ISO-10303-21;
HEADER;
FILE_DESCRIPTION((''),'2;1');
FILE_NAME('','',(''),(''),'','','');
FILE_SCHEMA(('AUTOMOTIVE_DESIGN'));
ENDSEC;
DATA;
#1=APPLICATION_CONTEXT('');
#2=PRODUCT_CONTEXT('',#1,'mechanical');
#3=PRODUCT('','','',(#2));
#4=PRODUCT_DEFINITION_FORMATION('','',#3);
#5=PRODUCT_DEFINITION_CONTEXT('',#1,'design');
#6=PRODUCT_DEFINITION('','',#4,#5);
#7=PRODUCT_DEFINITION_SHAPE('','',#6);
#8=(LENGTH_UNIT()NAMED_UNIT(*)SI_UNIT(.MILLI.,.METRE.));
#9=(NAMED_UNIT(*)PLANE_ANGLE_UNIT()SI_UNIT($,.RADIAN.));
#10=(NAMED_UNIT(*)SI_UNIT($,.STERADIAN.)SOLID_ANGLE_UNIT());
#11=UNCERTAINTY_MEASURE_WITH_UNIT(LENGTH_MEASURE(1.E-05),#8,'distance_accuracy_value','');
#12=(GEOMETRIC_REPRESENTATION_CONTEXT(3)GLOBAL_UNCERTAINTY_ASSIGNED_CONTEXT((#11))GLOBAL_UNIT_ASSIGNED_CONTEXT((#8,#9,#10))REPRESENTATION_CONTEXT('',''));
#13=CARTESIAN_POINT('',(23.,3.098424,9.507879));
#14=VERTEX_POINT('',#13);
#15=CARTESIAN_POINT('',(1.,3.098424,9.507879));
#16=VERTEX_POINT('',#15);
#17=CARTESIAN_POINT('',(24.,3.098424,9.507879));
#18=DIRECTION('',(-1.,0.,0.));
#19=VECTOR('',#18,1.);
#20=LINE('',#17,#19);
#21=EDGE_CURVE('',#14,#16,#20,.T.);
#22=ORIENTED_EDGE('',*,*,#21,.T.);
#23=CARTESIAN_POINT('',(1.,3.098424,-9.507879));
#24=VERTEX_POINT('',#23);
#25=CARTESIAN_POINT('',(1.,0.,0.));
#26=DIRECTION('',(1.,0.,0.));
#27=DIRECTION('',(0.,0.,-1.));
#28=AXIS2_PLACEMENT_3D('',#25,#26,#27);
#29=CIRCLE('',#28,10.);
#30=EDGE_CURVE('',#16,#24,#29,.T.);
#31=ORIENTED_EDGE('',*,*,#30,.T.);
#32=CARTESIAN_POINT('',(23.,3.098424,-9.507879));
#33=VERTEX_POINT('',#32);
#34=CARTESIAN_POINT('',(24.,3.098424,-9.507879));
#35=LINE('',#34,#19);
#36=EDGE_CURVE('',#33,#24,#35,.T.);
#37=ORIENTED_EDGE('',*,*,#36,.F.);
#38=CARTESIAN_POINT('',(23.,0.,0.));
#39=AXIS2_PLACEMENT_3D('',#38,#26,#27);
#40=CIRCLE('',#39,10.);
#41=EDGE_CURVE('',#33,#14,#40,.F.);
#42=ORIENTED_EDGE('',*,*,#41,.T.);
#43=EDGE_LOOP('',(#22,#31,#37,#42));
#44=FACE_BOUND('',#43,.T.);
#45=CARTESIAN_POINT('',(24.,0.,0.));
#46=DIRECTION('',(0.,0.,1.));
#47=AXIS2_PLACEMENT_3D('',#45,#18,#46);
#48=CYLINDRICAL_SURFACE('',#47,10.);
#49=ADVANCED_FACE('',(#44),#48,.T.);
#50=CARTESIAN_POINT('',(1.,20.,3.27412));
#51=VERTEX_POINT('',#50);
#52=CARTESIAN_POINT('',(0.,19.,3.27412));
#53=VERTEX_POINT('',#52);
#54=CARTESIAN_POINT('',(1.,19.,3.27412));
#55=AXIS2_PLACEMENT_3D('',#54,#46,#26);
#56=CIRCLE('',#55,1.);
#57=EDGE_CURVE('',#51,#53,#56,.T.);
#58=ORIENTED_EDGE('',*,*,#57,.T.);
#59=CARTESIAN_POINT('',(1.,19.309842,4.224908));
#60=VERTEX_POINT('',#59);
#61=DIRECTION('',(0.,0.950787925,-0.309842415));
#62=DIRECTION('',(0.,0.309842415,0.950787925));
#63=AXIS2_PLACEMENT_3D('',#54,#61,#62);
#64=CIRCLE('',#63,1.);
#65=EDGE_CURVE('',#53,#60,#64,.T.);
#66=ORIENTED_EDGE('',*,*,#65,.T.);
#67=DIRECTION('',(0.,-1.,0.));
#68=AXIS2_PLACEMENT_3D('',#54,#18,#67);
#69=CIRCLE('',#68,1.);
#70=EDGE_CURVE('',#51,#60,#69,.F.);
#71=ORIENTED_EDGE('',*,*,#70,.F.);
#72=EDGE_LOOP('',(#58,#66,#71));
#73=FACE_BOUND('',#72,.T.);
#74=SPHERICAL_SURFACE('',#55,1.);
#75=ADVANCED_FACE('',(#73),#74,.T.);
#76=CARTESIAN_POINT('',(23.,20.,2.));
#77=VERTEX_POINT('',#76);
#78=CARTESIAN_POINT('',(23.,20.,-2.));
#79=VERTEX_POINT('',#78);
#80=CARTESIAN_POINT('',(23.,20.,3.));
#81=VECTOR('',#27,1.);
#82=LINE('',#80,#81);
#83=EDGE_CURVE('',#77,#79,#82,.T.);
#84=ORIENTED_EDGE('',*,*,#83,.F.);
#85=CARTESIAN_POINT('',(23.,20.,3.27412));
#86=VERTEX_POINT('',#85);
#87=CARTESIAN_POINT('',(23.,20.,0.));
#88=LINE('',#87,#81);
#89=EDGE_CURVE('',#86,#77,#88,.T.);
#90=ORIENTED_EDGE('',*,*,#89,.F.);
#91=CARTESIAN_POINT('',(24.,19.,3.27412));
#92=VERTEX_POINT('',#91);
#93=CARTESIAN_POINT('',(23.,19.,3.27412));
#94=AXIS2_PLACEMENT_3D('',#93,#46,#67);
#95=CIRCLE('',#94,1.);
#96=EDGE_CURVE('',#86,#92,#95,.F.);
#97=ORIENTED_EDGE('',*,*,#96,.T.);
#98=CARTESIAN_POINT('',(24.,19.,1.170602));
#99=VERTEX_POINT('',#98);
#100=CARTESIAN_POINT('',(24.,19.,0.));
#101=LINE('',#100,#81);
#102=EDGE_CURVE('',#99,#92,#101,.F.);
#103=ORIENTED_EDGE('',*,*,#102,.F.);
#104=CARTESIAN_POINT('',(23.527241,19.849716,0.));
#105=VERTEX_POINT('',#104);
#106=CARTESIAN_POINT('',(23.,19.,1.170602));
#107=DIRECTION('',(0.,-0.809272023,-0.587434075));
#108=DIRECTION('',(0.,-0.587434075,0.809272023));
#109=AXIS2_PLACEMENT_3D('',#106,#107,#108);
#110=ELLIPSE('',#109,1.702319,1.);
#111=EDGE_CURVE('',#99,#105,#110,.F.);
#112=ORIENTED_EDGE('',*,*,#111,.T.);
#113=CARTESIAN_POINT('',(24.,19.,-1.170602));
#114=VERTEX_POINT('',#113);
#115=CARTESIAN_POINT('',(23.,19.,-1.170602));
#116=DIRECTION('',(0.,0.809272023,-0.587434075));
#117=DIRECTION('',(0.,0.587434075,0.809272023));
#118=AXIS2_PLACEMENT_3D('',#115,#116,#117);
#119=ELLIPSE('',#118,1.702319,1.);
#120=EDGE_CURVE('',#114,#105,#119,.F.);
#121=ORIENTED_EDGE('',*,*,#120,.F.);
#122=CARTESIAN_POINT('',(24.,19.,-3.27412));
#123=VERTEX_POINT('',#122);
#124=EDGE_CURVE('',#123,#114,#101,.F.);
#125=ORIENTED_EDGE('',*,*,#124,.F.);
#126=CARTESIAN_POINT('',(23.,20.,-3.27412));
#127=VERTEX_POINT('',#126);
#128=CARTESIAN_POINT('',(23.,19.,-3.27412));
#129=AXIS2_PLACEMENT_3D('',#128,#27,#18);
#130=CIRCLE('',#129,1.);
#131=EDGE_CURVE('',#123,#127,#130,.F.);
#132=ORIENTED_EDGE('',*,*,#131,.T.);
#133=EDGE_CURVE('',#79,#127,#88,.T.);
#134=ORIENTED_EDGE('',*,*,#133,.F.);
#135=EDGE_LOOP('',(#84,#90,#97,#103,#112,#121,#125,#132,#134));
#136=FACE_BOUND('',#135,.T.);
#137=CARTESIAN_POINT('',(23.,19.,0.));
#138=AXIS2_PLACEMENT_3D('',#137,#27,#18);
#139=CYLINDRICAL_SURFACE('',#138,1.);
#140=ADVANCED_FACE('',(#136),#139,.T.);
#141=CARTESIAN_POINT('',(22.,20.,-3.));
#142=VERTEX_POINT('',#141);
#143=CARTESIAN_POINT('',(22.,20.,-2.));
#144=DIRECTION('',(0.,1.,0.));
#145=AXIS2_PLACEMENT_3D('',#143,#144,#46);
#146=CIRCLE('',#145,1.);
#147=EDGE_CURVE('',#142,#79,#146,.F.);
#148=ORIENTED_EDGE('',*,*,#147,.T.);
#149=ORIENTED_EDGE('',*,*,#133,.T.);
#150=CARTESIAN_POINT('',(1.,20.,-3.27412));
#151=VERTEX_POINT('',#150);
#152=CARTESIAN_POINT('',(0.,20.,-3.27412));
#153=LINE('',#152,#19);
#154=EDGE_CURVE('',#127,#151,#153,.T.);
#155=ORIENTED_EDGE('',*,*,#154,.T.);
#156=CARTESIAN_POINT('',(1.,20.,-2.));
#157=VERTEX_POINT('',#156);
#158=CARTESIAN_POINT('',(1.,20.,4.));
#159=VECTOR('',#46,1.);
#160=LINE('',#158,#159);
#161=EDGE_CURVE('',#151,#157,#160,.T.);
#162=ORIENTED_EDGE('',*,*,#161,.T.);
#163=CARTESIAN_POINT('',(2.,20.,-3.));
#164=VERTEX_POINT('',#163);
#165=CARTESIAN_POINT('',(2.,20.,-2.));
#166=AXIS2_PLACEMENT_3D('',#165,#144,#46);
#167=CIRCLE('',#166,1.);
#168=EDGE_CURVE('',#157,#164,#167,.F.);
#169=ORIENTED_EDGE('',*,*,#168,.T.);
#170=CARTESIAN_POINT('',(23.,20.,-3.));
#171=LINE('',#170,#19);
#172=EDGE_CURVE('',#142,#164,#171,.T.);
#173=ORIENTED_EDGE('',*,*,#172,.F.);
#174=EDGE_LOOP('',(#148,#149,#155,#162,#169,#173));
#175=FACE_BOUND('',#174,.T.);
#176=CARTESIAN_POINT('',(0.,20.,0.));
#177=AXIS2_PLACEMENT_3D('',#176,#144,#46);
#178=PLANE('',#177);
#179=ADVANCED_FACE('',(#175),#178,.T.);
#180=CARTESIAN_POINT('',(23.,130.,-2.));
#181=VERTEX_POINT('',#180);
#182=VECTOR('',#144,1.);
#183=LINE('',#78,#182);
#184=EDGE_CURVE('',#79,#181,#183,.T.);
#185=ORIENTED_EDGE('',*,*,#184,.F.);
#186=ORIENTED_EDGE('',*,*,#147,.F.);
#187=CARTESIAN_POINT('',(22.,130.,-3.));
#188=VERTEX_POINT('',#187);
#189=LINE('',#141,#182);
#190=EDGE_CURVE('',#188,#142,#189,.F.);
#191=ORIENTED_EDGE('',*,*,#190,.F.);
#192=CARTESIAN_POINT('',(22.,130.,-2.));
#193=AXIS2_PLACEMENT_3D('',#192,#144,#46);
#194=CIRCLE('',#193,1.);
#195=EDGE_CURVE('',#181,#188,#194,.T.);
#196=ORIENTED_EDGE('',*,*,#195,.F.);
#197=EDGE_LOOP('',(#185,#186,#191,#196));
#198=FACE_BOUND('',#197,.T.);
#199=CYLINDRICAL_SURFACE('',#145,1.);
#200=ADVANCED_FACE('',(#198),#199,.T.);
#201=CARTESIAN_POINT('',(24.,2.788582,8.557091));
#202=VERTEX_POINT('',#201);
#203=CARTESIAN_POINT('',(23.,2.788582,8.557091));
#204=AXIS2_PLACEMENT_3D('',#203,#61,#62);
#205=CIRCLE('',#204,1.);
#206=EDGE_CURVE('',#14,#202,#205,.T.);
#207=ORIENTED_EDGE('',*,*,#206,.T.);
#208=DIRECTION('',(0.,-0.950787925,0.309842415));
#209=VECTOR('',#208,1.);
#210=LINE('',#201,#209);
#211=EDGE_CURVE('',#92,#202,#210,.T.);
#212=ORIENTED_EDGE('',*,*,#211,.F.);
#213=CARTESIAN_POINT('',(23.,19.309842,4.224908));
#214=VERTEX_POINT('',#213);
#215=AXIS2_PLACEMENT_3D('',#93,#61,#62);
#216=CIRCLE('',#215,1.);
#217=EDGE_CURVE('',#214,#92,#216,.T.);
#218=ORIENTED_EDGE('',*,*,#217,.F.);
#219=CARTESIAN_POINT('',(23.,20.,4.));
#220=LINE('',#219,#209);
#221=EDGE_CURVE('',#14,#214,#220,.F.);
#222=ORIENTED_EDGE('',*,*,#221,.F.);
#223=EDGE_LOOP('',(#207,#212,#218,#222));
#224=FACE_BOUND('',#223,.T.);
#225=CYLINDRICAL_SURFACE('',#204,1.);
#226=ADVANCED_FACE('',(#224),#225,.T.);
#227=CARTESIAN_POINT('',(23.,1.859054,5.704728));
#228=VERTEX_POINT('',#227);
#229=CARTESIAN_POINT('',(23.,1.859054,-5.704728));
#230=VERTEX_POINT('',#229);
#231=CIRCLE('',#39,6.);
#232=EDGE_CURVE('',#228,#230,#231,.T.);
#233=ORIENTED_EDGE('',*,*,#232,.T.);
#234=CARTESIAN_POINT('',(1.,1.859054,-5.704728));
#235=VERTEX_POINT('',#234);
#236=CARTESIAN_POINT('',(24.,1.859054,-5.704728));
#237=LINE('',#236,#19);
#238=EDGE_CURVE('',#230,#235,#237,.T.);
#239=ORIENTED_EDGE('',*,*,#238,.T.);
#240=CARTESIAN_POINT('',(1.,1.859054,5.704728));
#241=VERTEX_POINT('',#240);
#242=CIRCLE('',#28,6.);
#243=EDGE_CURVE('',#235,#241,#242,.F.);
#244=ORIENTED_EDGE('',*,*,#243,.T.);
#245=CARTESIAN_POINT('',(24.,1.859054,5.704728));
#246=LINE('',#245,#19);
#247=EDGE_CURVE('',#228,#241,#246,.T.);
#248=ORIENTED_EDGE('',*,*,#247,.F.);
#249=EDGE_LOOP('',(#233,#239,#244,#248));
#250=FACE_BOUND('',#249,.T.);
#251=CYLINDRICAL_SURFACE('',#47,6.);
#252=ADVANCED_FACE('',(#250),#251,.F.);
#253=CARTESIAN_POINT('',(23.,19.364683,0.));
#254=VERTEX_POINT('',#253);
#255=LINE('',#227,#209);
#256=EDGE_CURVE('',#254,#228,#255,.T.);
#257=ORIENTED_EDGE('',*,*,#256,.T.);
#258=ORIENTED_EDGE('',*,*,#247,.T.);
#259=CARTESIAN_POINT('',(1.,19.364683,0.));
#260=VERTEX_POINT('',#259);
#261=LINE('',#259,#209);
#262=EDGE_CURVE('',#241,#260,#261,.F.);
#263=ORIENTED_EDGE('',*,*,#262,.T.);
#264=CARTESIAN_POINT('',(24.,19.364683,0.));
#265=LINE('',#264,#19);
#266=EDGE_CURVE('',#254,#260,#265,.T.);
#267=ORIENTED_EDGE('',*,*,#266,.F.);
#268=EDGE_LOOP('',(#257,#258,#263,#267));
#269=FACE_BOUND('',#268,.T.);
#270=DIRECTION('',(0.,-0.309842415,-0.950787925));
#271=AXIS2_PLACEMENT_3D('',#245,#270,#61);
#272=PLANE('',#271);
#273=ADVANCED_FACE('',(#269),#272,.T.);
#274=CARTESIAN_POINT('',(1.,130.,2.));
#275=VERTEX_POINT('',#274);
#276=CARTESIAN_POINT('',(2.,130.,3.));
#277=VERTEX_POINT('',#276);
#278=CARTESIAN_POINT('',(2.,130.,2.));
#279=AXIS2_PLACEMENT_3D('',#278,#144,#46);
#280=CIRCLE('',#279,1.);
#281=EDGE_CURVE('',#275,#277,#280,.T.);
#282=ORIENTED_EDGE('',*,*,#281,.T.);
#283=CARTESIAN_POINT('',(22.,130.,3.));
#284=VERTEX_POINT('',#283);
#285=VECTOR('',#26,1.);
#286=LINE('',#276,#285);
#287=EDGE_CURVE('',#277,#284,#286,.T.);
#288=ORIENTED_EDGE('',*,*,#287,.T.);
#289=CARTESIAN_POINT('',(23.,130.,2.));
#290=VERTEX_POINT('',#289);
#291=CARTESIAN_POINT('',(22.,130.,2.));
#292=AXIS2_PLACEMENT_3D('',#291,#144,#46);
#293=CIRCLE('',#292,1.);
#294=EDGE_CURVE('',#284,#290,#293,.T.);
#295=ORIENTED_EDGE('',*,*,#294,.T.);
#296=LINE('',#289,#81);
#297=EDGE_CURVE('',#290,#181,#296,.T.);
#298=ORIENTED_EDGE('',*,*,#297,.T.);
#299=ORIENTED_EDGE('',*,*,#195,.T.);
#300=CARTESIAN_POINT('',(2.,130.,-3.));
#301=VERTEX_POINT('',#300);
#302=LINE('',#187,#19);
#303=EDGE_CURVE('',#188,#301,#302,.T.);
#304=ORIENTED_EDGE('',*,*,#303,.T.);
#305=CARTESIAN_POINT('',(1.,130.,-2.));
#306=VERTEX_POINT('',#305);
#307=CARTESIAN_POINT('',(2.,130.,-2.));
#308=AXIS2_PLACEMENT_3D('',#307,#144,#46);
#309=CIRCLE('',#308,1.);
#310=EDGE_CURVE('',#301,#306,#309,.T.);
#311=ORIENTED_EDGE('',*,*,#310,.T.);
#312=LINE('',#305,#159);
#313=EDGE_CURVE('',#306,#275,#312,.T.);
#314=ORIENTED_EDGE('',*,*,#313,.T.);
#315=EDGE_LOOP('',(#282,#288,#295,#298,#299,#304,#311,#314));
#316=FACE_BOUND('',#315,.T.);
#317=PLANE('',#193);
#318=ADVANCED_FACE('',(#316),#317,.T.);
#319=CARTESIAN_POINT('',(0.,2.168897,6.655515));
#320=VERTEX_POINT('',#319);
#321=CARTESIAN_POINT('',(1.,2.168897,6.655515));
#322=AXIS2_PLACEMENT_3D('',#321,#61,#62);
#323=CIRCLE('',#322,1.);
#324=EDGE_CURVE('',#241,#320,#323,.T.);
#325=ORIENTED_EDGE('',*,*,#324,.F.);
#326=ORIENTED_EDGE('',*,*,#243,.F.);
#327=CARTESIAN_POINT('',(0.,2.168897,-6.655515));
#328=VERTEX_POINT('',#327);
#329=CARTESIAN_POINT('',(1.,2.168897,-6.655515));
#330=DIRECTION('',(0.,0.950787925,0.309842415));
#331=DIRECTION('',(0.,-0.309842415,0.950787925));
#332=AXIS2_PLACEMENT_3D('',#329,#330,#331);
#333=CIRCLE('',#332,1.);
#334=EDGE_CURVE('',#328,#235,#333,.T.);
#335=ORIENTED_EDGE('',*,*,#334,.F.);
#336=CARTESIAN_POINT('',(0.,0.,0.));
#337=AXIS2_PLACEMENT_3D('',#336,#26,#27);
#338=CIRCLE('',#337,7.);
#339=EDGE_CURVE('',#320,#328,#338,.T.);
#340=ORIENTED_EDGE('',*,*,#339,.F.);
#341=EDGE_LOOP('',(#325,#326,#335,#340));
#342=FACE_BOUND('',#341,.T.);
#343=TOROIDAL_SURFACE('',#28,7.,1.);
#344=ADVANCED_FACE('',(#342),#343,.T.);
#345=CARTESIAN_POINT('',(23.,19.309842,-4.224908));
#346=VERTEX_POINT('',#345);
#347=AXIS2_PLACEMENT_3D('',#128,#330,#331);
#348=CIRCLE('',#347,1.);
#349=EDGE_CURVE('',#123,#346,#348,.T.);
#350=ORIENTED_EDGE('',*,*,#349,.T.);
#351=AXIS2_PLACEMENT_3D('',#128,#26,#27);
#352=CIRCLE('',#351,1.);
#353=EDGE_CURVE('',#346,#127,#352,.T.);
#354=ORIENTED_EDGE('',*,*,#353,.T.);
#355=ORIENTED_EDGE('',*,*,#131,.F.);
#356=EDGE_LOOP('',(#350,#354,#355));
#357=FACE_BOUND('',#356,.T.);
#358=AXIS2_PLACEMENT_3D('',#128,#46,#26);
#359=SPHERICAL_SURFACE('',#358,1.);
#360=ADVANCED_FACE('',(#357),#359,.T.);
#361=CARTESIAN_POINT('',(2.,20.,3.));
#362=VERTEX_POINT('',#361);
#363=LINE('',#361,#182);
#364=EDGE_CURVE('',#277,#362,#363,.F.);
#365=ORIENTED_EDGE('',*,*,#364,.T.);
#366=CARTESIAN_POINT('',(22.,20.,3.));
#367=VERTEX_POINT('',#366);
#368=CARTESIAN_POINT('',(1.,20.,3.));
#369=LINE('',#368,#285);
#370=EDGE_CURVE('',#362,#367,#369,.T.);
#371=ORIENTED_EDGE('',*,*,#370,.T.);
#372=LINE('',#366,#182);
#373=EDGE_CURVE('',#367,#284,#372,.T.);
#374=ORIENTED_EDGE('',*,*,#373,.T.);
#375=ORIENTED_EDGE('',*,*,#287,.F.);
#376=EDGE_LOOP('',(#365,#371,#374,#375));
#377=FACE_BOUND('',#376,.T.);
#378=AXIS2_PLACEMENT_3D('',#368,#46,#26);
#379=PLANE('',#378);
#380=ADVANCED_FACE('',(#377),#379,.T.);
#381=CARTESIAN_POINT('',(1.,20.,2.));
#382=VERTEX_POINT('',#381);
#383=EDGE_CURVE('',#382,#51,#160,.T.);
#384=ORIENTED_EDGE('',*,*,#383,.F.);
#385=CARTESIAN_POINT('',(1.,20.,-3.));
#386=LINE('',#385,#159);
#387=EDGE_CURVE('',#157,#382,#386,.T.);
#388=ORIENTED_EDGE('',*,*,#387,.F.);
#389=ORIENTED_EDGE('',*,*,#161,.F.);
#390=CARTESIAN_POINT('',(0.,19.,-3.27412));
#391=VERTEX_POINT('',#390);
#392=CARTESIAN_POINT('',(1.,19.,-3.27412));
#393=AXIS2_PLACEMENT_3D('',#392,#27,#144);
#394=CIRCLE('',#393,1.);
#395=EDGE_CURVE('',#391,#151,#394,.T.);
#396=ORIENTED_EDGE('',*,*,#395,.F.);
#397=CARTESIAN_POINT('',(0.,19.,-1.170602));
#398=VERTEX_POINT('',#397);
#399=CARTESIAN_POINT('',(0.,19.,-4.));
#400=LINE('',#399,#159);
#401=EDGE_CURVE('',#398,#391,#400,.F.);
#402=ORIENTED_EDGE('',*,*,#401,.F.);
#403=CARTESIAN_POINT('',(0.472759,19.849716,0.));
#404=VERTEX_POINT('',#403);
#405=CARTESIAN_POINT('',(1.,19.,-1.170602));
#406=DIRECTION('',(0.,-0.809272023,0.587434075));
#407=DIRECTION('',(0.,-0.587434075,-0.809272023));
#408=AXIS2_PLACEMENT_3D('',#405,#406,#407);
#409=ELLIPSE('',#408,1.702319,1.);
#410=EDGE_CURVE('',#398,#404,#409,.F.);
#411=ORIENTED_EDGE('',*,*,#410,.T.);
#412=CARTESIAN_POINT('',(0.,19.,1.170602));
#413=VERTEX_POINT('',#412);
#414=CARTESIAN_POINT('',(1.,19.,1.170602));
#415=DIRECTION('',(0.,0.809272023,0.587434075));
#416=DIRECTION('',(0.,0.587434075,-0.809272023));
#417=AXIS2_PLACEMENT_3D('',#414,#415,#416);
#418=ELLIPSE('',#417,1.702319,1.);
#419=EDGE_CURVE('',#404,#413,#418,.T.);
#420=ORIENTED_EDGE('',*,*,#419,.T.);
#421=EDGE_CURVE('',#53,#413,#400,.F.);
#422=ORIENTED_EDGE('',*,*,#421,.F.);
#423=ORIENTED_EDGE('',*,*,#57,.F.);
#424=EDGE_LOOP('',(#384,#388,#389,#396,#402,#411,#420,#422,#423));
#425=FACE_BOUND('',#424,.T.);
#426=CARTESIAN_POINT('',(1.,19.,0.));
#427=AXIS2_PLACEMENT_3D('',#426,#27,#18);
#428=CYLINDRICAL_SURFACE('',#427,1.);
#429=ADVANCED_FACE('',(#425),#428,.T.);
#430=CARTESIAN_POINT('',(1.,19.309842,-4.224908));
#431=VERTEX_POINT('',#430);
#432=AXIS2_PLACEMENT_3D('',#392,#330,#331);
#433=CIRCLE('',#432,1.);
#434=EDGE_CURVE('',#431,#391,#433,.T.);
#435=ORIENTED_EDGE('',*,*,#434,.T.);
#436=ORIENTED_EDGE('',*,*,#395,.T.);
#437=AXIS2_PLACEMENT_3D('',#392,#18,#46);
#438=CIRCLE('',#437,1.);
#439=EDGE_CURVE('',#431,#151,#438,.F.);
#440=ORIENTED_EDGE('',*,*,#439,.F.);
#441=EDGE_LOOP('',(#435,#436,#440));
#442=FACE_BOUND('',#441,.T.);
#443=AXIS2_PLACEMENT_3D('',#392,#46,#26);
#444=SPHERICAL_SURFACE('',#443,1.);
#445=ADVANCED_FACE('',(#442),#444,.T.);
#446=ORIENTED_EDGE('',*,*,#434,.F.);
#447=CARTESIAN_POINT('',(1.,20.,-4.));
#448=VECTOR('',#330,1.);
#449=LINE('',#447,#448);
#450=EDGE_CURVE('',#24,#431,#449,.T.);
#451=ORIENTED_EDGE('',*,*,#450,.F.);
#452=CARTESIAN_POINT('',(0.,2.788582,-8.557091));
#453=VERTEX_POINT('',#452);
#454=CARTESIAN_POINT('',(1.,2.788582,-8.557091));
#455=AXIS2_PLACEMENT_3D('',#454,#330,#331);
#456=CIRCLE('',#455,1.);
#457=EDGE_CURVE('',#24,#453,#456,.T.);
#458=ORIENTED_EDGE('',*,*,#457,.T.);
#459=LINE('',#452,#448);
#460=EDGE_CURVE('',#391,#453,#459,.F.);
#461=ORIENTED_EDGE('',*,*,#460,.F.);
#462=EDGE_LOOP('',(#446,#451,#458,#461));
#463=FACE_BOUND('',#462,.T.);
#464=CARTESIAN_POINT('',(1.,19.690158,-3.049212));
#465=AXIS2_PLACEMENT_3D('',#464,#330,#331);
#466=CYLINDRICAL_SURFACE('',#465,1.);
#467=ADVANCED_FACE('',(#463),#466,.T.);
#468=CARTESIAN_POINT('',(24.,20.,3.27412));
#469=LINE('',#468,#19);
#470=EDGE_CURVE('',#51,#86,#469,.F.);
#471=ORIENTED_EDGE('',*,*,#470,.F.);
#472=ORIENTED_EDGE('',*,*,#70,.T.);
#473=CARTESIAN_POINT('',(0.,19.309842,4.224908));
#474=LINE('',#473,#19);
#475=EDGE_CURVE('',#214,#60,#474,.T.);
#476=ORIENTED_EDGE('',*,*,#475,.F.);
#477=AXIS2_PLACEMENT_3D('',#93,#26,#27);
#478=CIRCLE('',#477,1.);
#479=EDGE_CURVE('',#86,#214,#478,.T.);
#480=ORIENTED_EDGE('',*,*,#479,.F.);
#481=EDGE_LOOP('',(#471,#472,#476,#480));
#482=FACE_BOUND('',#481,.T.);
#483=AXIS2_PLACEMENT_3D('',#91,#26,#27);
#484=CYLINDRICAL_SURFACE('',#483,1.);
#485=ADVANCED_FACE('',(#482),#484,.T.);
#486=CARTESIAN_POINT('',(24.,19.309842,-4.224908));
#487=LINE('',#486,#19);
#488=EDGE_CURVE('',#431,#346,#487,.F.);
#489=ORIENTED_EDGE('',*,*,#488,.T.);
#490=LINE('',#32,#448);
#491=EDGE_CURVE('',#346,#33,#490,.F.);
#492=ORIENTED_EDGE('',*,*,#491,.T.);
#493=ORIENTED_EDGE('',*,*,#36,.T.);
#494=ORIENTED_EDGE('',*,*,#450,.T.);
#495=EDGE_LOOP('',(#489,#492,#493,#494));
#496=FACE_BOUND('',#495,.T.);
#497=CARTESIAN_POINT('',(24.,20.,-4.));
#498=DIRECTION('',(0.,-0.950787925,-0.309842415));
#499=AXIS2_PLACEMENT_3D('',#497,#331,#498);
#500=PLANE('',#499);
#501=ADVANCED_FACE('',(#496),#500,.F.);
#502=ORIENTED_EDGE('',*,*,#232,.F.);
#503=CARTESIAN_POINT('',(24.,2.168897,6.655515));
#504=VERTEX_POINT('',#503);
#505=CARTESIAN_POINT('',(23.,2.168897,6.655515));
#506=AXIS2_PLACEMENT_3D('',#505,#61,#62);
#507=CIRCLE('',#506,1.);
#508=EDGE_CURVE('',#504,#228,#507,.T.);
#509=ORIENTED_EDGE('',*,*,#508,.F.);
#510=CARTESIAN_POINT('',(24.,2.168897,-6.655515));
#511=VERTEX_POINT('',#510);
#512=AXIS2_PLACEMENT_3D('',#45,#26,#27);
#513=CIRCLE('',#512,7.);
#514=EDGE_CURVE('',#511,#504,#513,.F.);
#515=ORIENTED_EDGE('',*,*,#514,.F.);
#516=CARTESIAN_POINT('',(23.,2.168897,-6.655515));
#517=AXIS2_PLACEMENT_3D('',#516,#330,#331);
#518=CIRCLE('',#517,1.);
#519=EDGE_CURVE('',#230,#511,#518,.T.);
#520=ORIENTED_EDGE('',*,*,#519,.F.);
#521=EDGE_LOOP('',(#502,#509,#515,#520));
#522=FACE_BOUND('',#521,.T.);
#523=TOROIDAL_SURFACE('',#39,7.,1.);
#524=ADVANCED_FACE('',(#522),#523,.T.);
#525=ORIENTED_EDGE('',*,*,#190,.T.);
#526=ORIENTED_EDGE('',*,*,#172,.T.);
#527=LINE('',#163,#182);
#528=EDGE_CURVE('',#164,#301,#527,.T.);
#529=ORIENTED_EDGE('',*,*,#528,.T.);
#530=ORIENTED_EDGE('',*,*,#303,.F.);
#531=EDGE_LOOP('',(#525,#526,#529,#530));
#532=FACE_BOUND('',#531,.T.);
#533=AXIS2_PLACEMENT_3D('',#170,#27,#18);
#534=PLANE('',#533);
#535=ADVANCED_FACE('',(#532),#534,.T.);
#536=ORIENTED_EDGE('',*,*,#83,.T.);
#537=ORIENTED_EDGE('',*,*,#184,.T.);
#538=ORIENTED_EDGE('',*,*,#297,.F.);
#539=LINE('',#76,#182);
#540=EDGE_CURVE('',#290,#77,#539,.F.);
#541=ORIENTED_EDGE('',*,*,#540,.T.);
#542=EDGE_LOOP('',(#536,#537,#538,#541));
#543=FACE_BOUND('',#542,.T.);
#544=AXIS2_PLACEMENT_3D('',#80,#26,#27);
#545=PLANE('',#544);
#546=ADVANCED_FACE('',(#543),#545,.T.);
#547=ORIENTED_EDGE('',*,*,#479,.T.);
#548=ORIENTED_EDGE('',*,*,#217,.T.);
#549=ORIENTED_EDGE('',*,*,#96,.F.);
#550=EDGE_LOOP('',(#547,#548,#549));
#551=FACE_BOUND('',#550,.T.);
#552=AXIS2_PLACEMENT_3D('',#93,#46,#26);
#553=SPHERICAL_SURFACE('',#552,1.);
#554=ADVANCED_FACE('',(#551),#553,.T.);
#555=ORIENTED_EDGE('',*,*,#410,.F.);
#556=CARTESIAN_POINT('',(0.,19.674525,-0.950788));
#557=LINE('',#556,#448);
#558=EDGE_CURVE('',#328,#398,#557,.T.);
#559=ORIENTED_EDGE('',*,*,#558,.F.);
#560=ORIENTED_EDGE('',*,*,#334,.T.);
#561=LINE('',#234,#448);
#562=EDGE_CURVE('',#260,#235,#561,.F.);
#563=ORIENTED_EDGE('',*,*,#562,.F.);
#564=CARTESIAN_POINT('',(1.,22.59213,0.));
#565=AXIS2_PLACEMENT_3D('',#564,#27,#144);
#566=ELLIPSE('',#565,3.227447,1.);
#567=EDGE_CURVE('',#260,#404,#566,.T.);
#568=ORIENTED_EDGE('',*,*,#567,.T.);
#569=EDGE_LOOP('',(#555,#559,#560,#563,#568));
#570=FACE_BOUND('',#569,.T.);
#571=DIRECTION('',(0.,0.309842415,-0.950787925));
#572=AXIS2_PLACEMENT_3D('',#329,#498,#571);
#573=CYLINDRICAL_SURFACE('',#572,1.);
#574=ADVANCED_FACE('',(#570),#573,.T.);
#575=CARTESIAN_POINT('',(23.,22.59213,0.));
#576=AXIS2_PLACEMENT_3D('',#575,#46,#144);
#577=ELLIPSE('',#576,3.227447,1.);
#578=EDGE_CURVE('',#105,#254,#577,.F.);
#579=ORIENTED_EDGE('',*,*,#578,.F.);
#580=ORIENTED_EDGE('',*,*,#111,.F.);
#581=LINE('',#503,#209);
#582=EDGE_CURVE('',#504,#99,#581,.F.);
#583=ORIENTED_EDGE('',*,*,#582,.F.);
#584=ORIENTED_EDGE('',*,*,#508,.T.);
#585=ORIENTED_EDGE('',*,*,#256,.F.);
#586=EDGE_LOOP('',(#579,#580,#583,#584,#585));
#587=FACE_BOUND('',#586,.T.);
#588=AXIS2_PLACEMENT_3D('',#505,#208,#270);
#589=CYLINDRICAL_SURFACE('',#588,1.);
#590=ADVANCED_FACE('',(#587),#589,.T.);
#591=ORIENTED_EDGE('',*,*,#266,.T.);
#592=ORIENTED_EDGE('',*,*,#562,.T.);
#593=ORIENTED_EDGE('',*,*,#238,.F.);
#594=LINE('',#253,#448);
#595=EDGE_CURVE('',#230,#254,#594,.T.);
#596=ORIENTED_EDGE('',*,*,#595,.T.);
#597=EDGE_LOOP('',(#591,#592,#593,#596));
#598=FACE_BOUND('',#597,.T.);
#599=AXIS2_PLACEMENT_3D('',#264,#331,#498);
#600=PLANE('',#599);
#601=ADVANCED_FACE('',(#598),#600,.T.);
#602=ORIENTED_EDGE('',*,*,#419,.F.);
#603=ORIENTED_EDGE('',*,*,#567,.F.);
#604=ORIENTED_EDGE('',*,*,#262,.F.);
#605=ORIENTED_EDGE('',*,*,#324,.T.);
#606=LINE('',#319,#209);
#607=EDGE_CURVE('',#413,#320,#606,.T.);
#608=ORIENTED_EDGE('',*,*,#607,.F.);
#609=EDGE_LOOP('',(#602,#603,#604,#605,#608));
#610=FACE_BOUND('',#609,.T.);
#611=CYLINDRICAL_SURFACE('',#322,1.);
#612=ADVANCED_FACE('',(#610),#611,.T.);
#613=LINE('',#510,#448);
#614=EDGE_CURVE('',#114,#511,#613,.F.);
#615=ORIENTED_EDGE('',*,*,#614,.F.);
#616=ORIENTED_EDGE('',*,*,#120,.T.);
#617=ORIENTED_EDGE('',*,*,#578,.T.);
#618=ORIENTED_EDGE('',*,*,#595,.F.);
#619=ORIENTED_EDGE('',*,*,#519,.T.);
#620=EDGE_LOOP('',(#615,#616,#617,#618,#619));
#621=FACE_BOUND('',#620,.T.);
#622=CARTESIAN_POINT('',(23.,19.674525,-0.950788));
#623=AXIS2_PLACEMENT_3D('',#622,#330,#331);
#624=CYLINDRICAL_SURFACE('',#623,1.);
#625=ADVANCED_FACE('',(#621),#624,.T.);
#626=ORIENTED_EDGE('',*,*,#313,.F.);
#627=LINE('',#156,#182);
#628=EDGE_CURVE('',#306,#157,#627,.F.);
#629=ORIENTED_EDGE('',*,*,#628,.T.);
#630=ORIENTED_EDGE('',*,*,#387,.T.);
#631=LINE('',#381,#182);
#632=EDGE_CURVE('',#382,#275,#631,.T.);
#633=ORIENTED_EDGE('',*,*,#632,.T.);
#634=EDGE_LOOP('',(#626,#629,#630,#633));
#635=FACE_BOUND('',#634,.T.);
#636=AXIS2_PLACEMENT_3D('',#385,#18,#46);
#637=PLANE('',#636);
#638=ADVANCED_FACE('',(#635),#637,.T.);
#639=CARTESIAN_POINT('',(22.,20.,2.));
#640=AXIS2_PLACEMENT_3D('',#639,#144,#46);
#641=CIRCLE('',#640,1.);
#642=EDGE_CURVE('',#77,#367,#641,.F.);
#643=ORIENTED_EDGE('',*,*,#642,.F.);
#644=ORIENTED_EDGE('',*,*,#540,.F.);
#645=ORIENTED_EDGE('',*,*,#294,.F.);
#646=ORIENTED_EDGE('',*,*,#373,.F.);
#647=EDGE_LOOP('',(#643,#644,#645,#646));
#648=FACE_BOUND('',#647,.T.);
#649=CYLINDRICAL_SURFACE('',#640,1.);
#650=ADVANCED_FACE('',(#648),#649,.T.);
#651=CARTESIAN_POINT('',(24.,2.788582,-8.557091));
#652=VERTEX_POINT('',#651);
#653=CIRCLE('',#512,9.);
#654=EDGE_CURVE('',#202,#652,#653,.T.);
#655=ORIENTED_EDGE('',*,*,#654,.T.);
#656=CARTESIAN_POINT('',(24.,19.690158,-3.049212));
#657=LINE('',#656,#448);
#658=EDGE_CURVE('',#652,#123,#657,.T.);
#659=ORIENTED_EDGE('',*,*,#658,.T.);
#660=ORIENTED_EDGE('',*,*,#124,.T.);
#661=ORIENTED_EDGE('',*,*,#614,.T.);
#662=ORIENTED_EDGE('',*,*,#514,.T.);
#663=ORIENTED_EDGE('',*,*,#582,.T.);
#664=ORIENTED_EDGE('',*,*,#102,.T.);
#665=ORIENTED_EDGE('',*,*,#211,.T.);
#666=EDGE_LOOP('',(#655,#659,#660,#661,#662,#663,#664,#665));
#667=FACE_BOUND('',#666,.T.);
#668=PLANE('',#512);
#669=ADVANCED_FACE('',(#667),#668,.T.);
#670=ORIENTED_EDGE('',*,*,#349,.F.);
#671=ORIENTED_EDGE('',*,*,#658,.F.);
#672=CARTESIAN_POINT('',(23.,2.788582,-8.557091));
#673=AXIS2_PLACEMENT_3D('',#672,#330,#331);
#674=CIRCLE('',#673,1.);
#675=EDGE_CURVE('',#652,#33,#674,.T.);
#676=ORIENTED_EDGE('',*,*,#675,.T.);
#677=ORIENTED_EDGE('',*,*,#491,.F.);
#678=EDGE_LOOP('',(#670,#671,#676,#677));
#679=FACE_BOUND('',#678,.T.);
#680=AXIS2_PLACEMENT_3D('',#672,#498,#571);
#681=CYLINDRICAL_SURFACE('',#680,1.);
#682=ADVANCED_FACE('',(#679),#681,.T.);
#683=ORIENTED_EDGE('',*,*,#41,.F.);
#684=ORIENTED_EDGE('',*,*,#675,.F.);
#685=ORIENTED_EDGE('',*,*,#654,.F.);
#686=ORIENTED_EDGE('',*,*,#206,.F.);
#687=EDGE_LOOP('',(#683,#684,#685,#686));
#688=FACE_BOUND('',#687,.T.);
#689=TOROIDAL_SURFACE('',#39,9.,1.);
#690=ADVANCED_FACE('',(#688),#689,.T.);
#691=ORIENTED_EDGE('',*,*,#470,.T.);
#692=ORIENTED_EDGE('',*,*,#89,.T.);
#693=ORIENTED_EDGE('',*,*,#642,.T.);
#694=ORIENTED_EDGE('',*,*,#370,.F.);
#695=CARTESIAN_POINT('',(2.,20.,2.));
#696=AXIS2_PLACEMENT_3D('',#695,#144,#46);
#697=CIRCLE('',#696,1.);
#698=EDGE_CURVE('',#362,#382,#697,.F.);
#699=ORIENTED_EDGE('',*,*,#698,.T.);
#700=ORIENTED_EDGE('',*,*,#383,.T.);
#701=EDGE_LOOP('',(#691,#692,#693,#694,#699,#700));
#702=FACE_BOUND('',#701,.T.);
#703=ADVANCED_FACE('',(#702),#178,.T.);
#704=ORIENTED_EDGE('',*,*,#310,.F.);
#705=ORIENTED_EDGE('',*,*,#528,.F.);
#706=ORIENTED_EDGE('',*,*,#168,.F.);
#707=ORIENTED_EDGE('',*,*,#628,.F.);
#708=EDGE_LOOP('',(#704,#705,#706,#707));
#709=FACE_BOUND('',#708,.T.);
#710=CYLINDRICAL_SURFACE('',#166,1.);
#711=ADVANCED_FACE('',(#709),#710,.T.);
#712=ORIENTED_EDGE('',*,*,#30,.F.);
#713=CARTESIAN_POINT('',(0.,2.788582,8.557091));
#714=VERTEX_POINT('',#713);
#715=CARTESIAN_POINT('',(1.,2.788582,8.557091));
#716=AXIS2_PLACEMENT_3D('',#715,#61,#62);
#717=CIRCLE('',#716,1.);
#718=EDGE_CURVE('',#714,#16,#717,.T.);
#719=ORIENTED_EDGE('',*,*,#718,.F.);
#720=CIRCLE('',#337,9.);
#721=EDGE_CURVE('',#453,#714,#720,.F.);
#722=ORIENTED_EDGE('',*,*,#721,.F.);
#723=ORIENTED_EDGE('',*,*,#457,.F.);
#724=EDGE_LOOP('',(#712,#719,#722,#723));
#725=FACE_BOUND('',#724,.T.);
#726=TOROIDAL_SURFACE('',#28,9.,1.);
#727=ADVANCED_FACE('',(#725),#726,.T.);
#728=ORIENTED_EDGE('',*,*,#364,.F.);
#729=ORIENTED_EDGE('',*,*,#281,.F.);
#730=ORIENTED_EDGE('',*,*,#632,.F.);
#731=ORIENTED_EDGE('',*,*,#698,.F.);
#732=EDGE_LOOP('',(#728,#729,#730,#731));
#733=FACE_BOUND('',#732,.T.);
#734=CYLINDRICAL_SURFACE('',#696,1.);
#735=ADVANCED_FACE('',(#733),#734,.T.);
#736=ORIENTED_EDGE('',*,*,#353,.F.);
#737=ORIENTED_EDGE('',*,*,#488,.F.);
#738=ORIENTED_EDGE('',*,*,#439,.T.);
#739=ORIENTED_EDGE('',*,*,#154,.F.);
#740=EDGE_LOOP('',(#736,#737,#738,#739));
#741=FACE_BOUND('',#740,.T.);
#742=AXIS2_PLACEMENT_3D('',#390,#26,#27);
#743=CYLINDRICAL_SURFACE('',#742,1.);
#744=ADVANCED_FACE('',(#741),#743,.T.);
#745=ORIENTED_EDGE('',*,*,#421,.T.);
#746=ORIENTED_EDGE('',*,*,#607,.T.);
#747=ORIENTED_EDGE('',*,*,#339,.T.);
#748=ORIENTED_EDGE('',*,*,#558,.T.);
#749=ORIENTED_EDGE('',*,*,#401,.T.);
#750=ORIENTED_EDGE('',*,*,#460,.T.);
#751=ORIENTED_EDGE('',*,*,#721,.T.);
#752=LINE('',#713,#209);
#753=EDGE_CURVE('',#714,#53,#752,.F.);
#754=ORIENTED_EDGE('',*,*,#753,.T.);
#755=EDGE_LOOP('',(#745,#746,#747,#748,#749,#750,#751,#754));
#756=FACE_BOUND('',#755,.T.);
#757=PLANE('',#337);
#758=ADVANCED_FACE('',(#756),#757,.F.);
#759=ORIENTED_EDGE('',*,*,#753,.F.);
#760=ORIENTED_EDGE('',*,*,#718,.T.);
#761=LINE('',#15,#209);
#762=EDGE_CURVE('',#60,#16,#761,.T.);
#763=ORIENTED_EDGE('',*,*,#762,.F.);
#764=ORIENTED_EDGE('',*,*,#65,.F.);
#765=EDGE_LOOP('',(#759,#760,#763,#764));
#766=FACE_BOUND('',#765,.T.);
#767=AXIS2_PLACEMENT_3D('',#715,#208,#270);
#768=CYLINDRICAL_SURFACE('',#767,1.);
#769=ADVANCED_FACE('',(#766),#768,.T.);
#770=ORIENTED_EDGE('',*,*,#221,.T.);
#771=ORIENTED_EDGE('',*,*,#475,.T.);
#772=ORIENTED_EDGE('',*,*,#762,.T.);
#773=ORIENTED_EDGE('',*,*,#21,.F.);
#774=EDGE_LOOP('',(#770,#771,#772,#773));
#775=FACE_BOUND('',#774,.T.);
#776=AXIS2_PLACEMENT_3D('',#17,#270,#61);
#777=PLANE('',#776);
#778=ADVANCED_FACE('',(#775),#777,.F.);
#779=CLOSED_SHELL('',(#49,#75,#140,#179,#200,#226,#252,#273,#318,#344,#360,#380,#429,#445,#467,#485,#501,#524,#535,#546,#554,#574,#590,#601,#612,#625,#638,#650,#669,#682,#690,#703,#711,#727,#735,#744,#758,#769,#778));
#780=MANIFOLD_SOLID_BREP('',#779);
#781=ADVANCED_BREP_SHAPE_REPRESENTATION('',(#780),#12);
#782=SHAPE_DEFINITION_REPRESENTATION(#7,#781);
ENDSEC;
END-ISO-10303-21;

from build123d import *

# Parameters (mm, degrees)
BOSS_EXTRUDE1_DEPTH = 24
SKETCH2_W           = 24
SKETCH2_H           = 8
SKETCH2_W_2         = 22
SKETCH2_H_2         = 6
CUT_EXTRUDE1_DEPTH  = 40
FILLET1_R           = 1
FILLET2_R           = 1
BOSS_EXTRUDE2_DEPTH = 70


with BuildPart() as part:
    # Sketch1 → Boss-Extrude1 (new body)
    with BuildSketch(Plane(origin=(0, 0, 0), x_dir=(0, 0, -1), z_dir=(1, 0, 0))):
        with BuildLine():
            Line((-9.507879247, 3.098424151), (-4, 20))
            Line((-4, 20), (-4, 60))
            Line((-4, 60), (4, 60))
            Line((4, 60), (4, 20))
            Line((4, 20), (9.507879247, 3.098424151))
            ThreePointArc((9.507879247, 3.098424151), (0, -10), (-9.507879247, 3.098424151))
        make_face()
        with BuildLine():
            Line((-5.704727548, 1.85905449), (0, 19.364682524))
            Line((0, 19.364682524), (5.704727548, 1.85905449))
            ThreePointArc((5.704727548, 1.85905449), (0, -6), (-5.704727548, 1.85905449))
        make_face(mode=Mode.SUBTRACT)
    extrude(amount=BOSS_EXTRUDE1_DEPTH)

    # Sketch2 → Cut-Extrude1 (cut)
    with BuildSketch(Plane(origin=(0, 60, 0), x_dir=(1, 0, 0), z_dir=(0, 1, 0))):
        with Locations((12, 0)):
            Rectangle(SKETCH2_W, SKETCH2_H)
        with Locations((12, 0)):
            Rectangle(SKETCH2_W_2, SKETCH2_H_2, mode=Mode.SUBTRACT)
    extrude(amount=-CUT_EXTRUDE1_DEPTH, mode=Mode.SUBTRACT)

    # Fillet1
    # the kernel refuses this fillet: 1 mm, written as the material it takes off along each edge
    with BuildSketch(Plane(origin=(1, 19, 3.274120372), x_dir=(0, 0.3098424150516233, 0.9507879247418836), z_dir=(-1, 0, 0))) as fillet1_piece_1_section:
        Polygon((0, 0), (FILLET1_R * 1.02, 0), (FILLET1_R * 1.02, FILLET1_R * 0.740397220377), (FILLET1_R * 0.316039263353, FILLET1_R * 0.969803683237), align=None)
    fillet1_piece_1 = extrude(amount=FILLET1_R * 1.02, mode=Mode.PRIVATE)
    fillet1_piece_1 = fillet1_piece_1 - Plane(origin=(1, 19, 3.274120372), x_dir=(0, -0.8092720231948041, -0.5874340750026239), z_dir=(-1, 0, 0)) * Sphere(FILLET1_R, mode=Mode.PRIVATE)
    add(fillet1_piece_1, mode=Mode.SUBTRACT)
    with BuildSketch(Plane(origin=(23, 19, 3.274120372), x_dir=(0, 0.3098424150516233, 0.9507879247418836), z_dir=(1, 0, 0))) as fillet1_piece_2_section:
        Polygon((0, 0), (FILLET1_R * 1.02, 0), (FILLET1_R * 1.02, -FILLET1_R * 0.740397220377), (FILLET1_R * 0.316039263353, -FILLET1_R * 0.969803683237), align=None)
    fillet1_piece_2 = extrude(amount=FILLET1_R * 1.02, mode=Mode.PRIVATE)
    fillet1_piece_2 = fillet1_piece_2 - Plane(origin=(23, 19, 3.274120372), x_dir=(0, -0.8092720231948041, -0.5874340750026239), z_dir=(1, 0, 0)) * Sphere(FILLET1_R, mode=Mode.PRIVATE)
    add(fillet1_piece_2, mode=Mode.SUBTRACT)
    with BuildSketch(Plane(origin=(1, 19, -3.274120372), x_dir=(0, 0.3098424150516232, -0.9507879247418838), z_dir=(-1, 0, 0))) as fillet1_piece_3_section:
        Polygon((0, 0), (FILLET1_R * 1.02, 0), (FILLET1_R * 1.02, -FILLET1_R * 0.740397220377), (FILLET1_R * 0.316039263353, -FILLET1_R * 0.969803683237), align=None)
    fillet1_piece_3 = extrude(amount=FILLET1_R * 1.02, mode=Mode.PRIVATE)
    fillet1_piece_3 = fillet1_piece_3 - Plane(origin=(1, 19, -3.274120372), x_dir=(0, -0.8092720231948041, 0.587434075002624), z_dir=(-1, 0, 0)) * Sphere(FILLET1_R, mode=Mode.PRIVATE)
    add(fillet1_piece_3, mode=Mode.SUBTRACT)
    with BuildSketch(Plane(origin=(23, 19, -3.274120372), x_dir=(0, 0.3098424150516232, -0.9507879247418838), z_dir=(1, 0, 0))) as fillet1_piece_4_section:
        Polygon((0, 0), (FILLET1_R * 1.02, 0), (FILLET1_R * 1.02, FILLET1_R * 0.740397220377), (FILLET1_R * 0.316039263353, FILLET1_R * 0.969803683237), align=None)
    fillet1_piece_4 = extrude(amount=FILLET1_R * 1.02, mode=Mode.PRIVATE)
    fillet1_piece_4 = fillet1_piece_4 - Plane(origin=(23, 19, -3.274120372), x_dir=(0, -0.8092720231948041, 0.587434075002624), z_dir=(1, 0, 0)) * Sphere(FILLET1_R, mode=Mode.PRIVATE)
    add(fillet1_piece_4, mode=Mode.SUBTRACT)
    with BuildSketch(Plane(origin=(1, 20, 4), x_dir=(0, -0.9507879247418841, 0.30984241505162113), z_dir=(1, 0, 0)), Plane(origin=(1, 20, -4), x_dir=(0, 0, 1), z_dir=(1, 0, 0))) as fillet1_piece_5:
        with BuildLine():
            CenterArc((FILLET1_R * 0.725879627821, FILLET1_R), FILLET1_R, 198.04973395, 71.95026605)
            Line((-FILLET1_R * 0.224908296921, FILLET1_R * 0.690157584948), (-FILLET1_R * 0.243924055416, FILLET1_R * 0.683960736647))
            Line((-FILLET1_R * 0.243924055416, FILLET1_R * 0.683960736647), (-FILLET1_R * 0.0145175925564, -FILLET1_R * 0.02))
            Line((-FILLET1_R * 0.0145175925564, -FILLET1_R * 0.02), (FILLET1_R * 0.725879627821, -FILLET1_R * 0.02))
            Line((FILLET1_R * 0.725879627821, -FILLET1_R * 0.02), (FILLET1_R * 0.725879627821, 0))
        make_face()
    extrude(amount=22, mode=Mode.SUBTRACT)
    with BuildSketch(Plane(origin=(0, 0, 0), x_dir=(0, 0.3098424150516232, -0.9507879247418836), z_dir=(0, 0.9507879247418836, 0.3098424150516232))) as fillet1_piece_6:
        with BuildLine():
            CenterArc((6 + FILLET1_R, -FILLET1_R), FILLET1_R, 90, 90)
            Line((6, -FILLET1_R), (6 - FILLET1_R * 0.02, -FILLET1_R))
            Line((6 - FILLET1_R * 0.02, -FILLET1_R), (6 - FILLET1_R * 0.02, FILLET1_R * 0.02))
            Line((6 - FILLET1_R * 0.02, FILLET1_R * 0.02), (6 + FILLET1_R, FILLET1_R * 0.02))
            Line((6 + FILLET1_R, FILLET1_R * 0.02), (6 + FILLET1_R, 0))
        make_face()
    revolve(axis=Axis((0, 0, 0), (-1, 0, 0)), revolution_arc=216.0994679, mode=Mode.SUBTRACT)
    with BuildSketch(Plane(origin=(0, 21.741652336, 0.774606038), x_dir=(0, 0.30984241505162313, -0.9507879247418837), z_dir=(0, -0.9507879247418837, -0.30984241505162313))) as fillet1_piece_7_section:
        with BuildLine():
            CenterArc((FILLET1_R, FILLET1_R), FILLET1_R, 180, 90)
            Line((0, FILLET1_R), (-FILLET1_R * 0.02, FILLET1_R))
            Line((-FILLET1_R * 0.02, FILLET1_R), (-FILLET1_R * 0.02, -FILLET1_R * 0.02))
            Line((-FILLET1_R * 0.02, -FILLET1_R * 0.02), (FILLET1_R, -FILLET1_R * 0.02))
            Line((FILLET1_R, -FILLET1_R * 0.02), (FILLET1_R, 0))
        make_face()
    fillet1_piece_7 = extrude(amount=20.91170631, mode=Mode.PRIVATE)
    fillet1_piece_7 = split(fillet1_piece_7, bisect_by=Plane(origin=(0.224383955, 12.542231939, 2.223297658), z_dir=(0, -0.30984241505162313, -0.9507879247418837)), keep=Keep.TOP, mode=Mode.PRIVATE)
    add(fillet1_piece_7, mode=Mode.SUBTRACT)
    with BuildSketch(Plane(origin=(24, 3.098424151, 9.507879247), x_dir=(-1, 0, 0), z_dir=(0, 0.9507879247418836, -0.3098424150516233)), Plane(origin=(0, 19.309842415, -4.224908297), x_dir=(0, -0.3098424150516232, 0.9507879247418837), z_dir=(0, -0.9507879247418837, -0.3098424150516232))) as fillet1_piece_8:
        with BuildLine():
            CenterArc((FILLET1_R, -FILLET1_R), FILLET1_R, 90, 90)
            Line((0, -FILLET1_R), (-FILLET1_R * 0.02, -FILLET1_R))
            Line((-FILLET1_R * 0.02, -FILLET1_R), (-FILLET1_R * 0.02, FILLET1_R * 0.02))
            Line((-FILLET1_R * 0.02, FILLET1_R * 0.02), (FILLET1_R, FILLET1_R * 0.02))
            Line((FILLET1_R, FILLET1_R * 0.02), (FILLET1_R, 0))
        make_face()
    extrude(amount=17.050509207, mode=Mode.SUBTRACT)
    with BuildSketch(Plane(origin=(0, 1.85905449, 5.704727548), x_dir=(0, 0.3098424150516232, 0.9507879247418837), z_dir=(0, 0.9507879247418837, -0.30984241505162313))) as fillet1_piece_9_section:
        with BuildLine():
            CenterArc((FILLET1_R, FILLET1_R), FILLET1_R, 180, 90)
            Line((0, FILLET1_R), (-FILLET1_R * 0.02, FILLET1_R))
            Line((-FILLET1_R * 0.02, FILLET1_R), (-FILLET1_R * 0.02, -FILLET1_R * 0.02))
            Line((-FILLET1_R * 0.02, -FILLET1_R * 0.02), (FILLET1_R, -FILLET1_R * 0.02))
            Line((FILLET1_R, -FILLET1_R * 0.02), (FILLET1_R, 0))
        make_face()
    fillet1_piece_9 = extrude(amount=20.91170631, mode=Mode.PRIVATE)
    fillet1_piece_9 = split(fillet1_piece_9, bisect_by=Plane(origin=(0.224383955, 12.542231939, -2.223297658), z_dir=(0, -0.30984241505162313, 0.9507879247418837)), keep=Keep.TOP, mode=Mode.PRIVATE)
    add(fillet1_piece_9, mode=Mode.SUBTRACT)
    with BuildSketch(Plane(origin=(24, 0, 0), x_dir=(0, 0.3098424150516232, -0.9507879247418836), z_dir=(0, 0.9507879247418836, 0.3098424150516232))) as fillet1_piece_10:
        with BuildLine():
            CenterArc((6 + FILLET1_R, FILLET1_R), FILLET1_R, 180, 90)
            Line((6, FILLET1_R), (6 - FILLET1_R * 0.02, FILLET1_R))
            Line((6 - FILLET1_R * 0.02, FILLET1_R), (6 - FILLET1_R * 0.02, -FILLET1_R * 0.02))
            Line((6 - FILLET1_R * 0.02, -FILLET1_R * 0.02), (6 + FILLET1_R, -FILLET1_R * 0.02))
            Line((6 + FILLET1_R, -FILLET1_R * 0.02), (6 + FILLET1_R, 0))
        make_face()
    revolve(axis=Axis((24, 0, 0), (-1, 0, 0)), revolution_arc=216.0994679, mode=Mode.SUBTRACT)
    with BuildSketch(Plane(origin=(24, 21.741652336, 0.774606038), x_dir=(0, 0.30984241505162313, -0.9507879247418837), z_dir=(0, -0.9507879247418837, -0.30984241505162313))) as fillet1_piece_11_section:
        with BuildLine():
            CenterArc((FILLET1_R, -FILLET1_R), FILLET1_R, 90, 90)
            Line((0, -FILLET1_R), (-FILLET1_R * 0.02, -FILLET1_R))
            Line((-FILLET1_R * 0.02, -FILLET1_R), (-FILLET1_R * 0.02, FILLET1_R * 0.02))
            Line((-FILLET1_R * 0.02, FILLET1_R * 0.02), (FILLET1_R, FILLET1_R * 0.02))
            Line((FILLET1_R, FILLET1_R * 0.02), (FILLET1_R, 0))
        make_face()
    fillet1_piece_11 = extrude(amount=20.91170631, mode=Mode.PRIVATE)
    fillet1_piece_11 = split(fillet1_piece_11, bisect_by=Plane(origin=(23.775616045, 12.542231939, 2.223297658), z_dir=(0, -0.30984241505162313, -0.9507879247418837)), keep=Keep.TOP, mode=Mode.PRIVATE)
    add(fillet1_piece_11, mode=Mode.SUBTRACT)
    with BuildSketch(Plane(origin=(24, 1.85905449, 5.704727548), x_dir=(0, 0.3098424150516232, 0.9507879247418837), z_dir=(0, 0.9507879247418837, -0.30984241505162313))) as fillet1_piece_12_section:
        with BuildLine():
            CenterArc((FILLET1_R, -FILLET1_R), FILLET1_R, 90, 90)
            Line((0, -FILLET1_R), (-FILLET1_R * 0.02, -FILLET1_R))
            Line((-FILLET1_R * 0.02, -FILLET1_R), (-FILLET1_R * 0.02, FILLET1_R * 0.02))
            Line((-FILLET1_R * 0.02, FILLET1_R * 0.02), (FILLET1_R, FILLET1_R * 0.02))
            Line((FILLET1_R, FILLET1_R * 0.02), (FILLET1_R, 0))
        make_face()
    fillet1_piece_12 = extrude(amount=20.91170631, mode=Mode.PRIVATE)
    fillet1_piece_12 = split(fillet1_piece_12, bisect_by=Plane(origin=(23.775616045, 12.542231939, -2.223297658), z_dir=(0, -0.30984241505162313, 0.9507879247418837)), keep=Keep.TOP, mode=Mode.PRIVATE)
    add(fillet1_piece_12, mode=Mode.SUBTRACT)
    with BuildSketch(Plane(origin=(24, 20, 3.274120372), x_dir=(-1, 0, 0), z_dir=(0, 0, -1)), Plane(origin=(0, 20, -3.274120372), x_dir=(1, 0, 0), z_dir=(0, 0, 1))) as fillet1_piece_13:
        with BuildLine():
            CenterArc((FILLET1_R, -FILLET1_R), FILLET1_R, 90, 90)
            Line((0, -FILLET1_R), (-FILLET1_R * 0.02, -FILLET1_R))
            Line((-FILLET1_R * 0.02, -FILLET1_R), (-FILLET1_R * 0.02, FILLET1_R * 0.02))
            Line((-FILLET1_R * 0.02, FILLET1_R * 0.02), (FILLET1_R, FILLET1_R * 0.02))
            Line((FILLET1_R, FILLET1_R * 0.02), (FILLET1_R, 0))
        make_face()
    extrude(amount=6.548240744, mode=Mode.SUBTRACT)
    with BuildSketch(Plane(origin=(24, 0, 0), x_dir=(0, 0.3098424150516232, -0.9507879247418837), z_dir=(0, 0.9507879247418837, 0.3098424150516232))) as fillet1_piece_14:
        with BuildLine():
            CenterArc((10 - FILLET1_R, FILLET1_R), FILLET1_R, 270, 90)
            Line((10 - FILLET1_R, 0), (10 - FILLET1_R, -FILLET1_R * 0.02))
            Line((10 - FILLET1_R, -FILLET1_R * 0.02), (10 + FILLET1_R * 0.02, -FILLET1_R * 0.02))
            Line((10 + FILLET1_R * 0.02, -FILLET1_R * 0.02), (10 + FILLET1_R * 0.02, FILLET1_R))
            Line((10 + FILLET1_R * 0.02, FILLET1_R), (10, FILLET1_R))
        make_face()
    revolve(axis=Axis((24, 0, 0), (-1, 0, 0)), revolution_arc=216.0994679, mode=Mode.SUBTRACT)
    with BuildSketch(Plane(origin=(0, 3.098424151, 9.507879247), x_dir=(1, 0, 0), z_dir=(0, 0.9507879247418836, -0.3098424150516233)), Plane(origin=(24, 19.309842415, -4.224908297), x_dir=(0, -0.3098424150516232, 0.9507879247418837), z_dir=(0, -0.9507879247418837, -0.3098424150516232))) as fillet1_piece_15:
        with BuildLine():
            CenterArc((FILLET1_R, FILLET1_R), FILLET1_R, 180, 90)
            Line((0, FILLET1_R), (-FILLET1_R * 0.02, FILLET1_R))
            Line((-FILLET1_R * 0.02, FILLET1_R), (-FILLET1_R * 0.02, -FILLET1_R * 0.02))
            Line((-FILLET1_R * 0.02, -FILLET1_R * 0.02), (FILLET1_R, -FILLET1_R * 0.02))
            Line((FILLET1_R, -FILLET1_R * 0.02), (FILLET1_R, 0))
        make_face()
    extrude(amount=17.050509207, mode=Mode.SUBTRACT)
    with BuildSketch(Plane(origin=(0, 0, 0), x_dir=(0, 0.3098424150516232, -0.9507879247418837), z_dir=(0, 0.9507879247418837, 0.3098424150516232))) as fillet1_piece_16:
        with BuildLine():
            CenterArc((10 - FILLET1_R, -FILLET1_R), FILLET1_R, 0, 90)
            Line((10 - FILLET1_R, 0), (10 - FILLET1_R, FILLET1_R * 0.02))
            Line((10 - FILLET1_R, FILLET1_R * 0.02), (10 + FILLET1_R * 0.02, FILLET1_R * 0.02))
            Line((10 + FILLET1_R * 0.02, FILLET1_R * 0.02), (10 + FILLET1_R * 0.02, -FILLET1_R))
            Line((10 + FILLET1_R * 0.02, -FILLET1_R), (10, -FILLET1_R))
        make_face()
    revolve(axis=Axis((0, 0, 0), (-1, 0, 0)), revolution_arc=216.0994679, mode=Mode.SUBTRACT)
    with BuildSketch(Plane(origin=(0, 21.741652336, 0.774606038), x_dir=(0, 0.30984241505162313, -0.9507879247418837), z_dir=(0, -0.9507879247418837, -0.30984241505162313))) as fillet1_piece_17a_section:
        with BuildLine():
            CenterArc((FILLET1_R, FILLET1_R), FILLET1_R, 180, 90)
            Line((0, FILLET1_R), (-FILLET1_R * 0.02, FILLET1_R))
            Line((-FILLET1_R * 0.02, FILLET1_R), (-FILLET1_R * 0.02, -FILLET1_R * 0.02))
            Line((-FILLET1_R * 0.02, -FILLET1_R * 0.02), (FILLET1_R, -FILLET1_R * 0.02))
            Line((FILLET1_R, -FILLET1_R * 0.02), (FILLET1_R, 0))
        make_face()
    fillet1_piece_17a = extrude(amount=20.91170631, mode=Mode.PRIVATE)
    fillet1_piece_17a = split(fillet1_piece_17a, bisect_by=Plane(origin=(0.243592095, 20.539413838, -0.382821003), z_dir=(0, 0.30984241505162313, 0.9507879247418837)), keep=Keep.TOP, mode=Mode.PRIVATE)
    with BuildSketch(Plane(origin=(0, 1.85905449, 5.704727548), x_dir=(0, 0.3098424150516232, 0.9507879247418837), z_dir=(0, 0.9507879247418837, -0.30984241505162313))) as fillet1_piece_17b_section:
        with BuildLine():
            CenterArc((FILLET1_R, FILLET1_R), FILLET1_R, 180, 90)
            Line((0, FILLET1_R), (-FILLET1_R * 0.02, FILLET1_R))
            Line((-FILLET1_R * 0.02, FILLET1_R), (-FILLET1_R * 0.02, -FILLET1_R * 0.02))
            Line((-FILLET1_R * 0.02, -FILLET1_R * 0.02), (FILLET1_R, -FILLET1_R * 0.02))
            Line((FILLET1_R, -FILLET1_R * 0.02), (FILLET1_R, 0))
        make_face()
    fillet1_piece_17b = extrude(amount=20.91170631, mode=Mode.PRIVATE)
    fillet1_piece_17b = split(fillet1_piece_17b, bisect_by=Plane(origin=(0.243592095, 20.539413838, 0.382821003), z_dir=(0, 0.30984241505162313, -0.9507879247418837)), keep=Keep.TOP, mode=Mode.PRIVATE)
    fillet1_piece_17 = fillet1_piece_17a & fillet1_piece_17b
    add(fillet1_piece_17, mode=Mode.SUBTRACT)
    with BuildSketch(Plane(origin=(24, 21.741652336, 0.774606038), x_dir=(0, 0.30984241505162313, -0.9507879247418837), z_dir=(0, -0.9507879247418837, -0.30984241505162313))) as fillet1_piece_18a_section:
        with BuildLine():
            CenterArc((FILLET1_R, -FILLET1_R), FILLET1_R, 90, 90)
            Line((0, -FILLET1_R), (-FILLET1_R * 0.02, -FILLET1_R))
            Line((-FILLET1_R * 0.02, -FILLET1_R), (-FILLET1_R * 0.02, FILLET1_R * 0.02))
            Line((-FILLET1_R * 0.02, FILLET1_R * 0.02), (FILLET1_R, FILLET1_R * 0.02))
            Line((FILLET1_R, FILLET1_R * 0.02), (FILLET1_R, 0))
        make_face()
    fillet1_piece_18a = extrude(amount=20.91170631, mode=Mode.PRIVATE)
    fillet1_piece_18a = split(fillet1_piece_18a, bisect_by=Plane(origin=(23.756407905, 20.539413838, -0.382821003), z_dir=(0, 0.30984241505162313, 0.9507879247418837)), keep=Keep.TOP, mode=Mode.PRIVATE)
    with BuildSketch(Plane(origin=(24, 1.85905449, 5.704727548), x_dir=(0, 0.3098424150516232, 0.9507879247418837), z_dir=(0, 0.9507879247418837, -0.30984241505162313))) as fillet1_piece_18b_section:
        with BuildLine():
            CenterArc((FILLET1_R, -FILLET1_R), FILLET1_R, 90, 90)
            Line((0, -FILLET1_R), (-FILLET1_R * 0.02, -FILLET1_R))
            Line((-FILLET1_R * 0.02, -FILLET1_R), (-FILLET1_R * 0.02, FILLET1_R * 0.02))
            Line((-FILLET1_R * 0.02, FILLET1_R * 0.02), (FILLET1_R, FILLET1_R * 0.02))
            Line((FILLET1_R, FILLET1_R * 0.02), (FILLET1_R, 0))
        make_face()
    fillet1_piece_18b = extrude(amount=20.91170631, mode=Mode.PRIVATE)
    fillet1_piece_18b = split(fillet1_piece_18b, bisect_by=Plane(origin=(23.756407905, 20.539413838, 0.382821003), z_dir=(0, 0.30984241505162313, -0.9507879247418837)), keep=Keep.TOP, mode=Mode.PRIVATE)
    fillet1_piece_18 = fillet1_piece_18a & fillet1_piece_18b
    add(fillet1_piece_18, mode=Mode.SUBTRACT)

    # Fillet2
    fillet2_edges = [part.edges().sort_by_distance(p)[0] for p in [
        (23, 40, -3),
        (23, 40, 3),
        (1, 40, 3),
        (1, 40, -3),
    ]]
    fillet(fillet2_edges, radius=FILLET2_R)

    # Sketch3 → Boss-Extrude2 (add)
    with BuildSketch(Plane(origin=(0, 60, 0), x_dir=(1, 0, 0), z_dir=(0, 1, 0))):
        with BuildLine():
            Line((22, 3), (2, 3))
            ThreePointArc((2, 3), (1.292893219, 2.707106781), (1, 2))
            Line((1, 2), (1, -2))
            ThreePointArc((1, -2), (1.292893219, -2.707106781), (2, -3))
            Line((2, -3), (22, -3))
            ThreePointArc((22, -3), (22.707106781, -2.707106781), (23, -2))
            Line((23, -2), (23, 2))
            ThreePointArc((23, 2), (22.707106781, 2.707106781), (22, 3))
        make_face()
    extrude(amount=BOSS_EXTRUDE2_DEPTH)


solid = part.part
